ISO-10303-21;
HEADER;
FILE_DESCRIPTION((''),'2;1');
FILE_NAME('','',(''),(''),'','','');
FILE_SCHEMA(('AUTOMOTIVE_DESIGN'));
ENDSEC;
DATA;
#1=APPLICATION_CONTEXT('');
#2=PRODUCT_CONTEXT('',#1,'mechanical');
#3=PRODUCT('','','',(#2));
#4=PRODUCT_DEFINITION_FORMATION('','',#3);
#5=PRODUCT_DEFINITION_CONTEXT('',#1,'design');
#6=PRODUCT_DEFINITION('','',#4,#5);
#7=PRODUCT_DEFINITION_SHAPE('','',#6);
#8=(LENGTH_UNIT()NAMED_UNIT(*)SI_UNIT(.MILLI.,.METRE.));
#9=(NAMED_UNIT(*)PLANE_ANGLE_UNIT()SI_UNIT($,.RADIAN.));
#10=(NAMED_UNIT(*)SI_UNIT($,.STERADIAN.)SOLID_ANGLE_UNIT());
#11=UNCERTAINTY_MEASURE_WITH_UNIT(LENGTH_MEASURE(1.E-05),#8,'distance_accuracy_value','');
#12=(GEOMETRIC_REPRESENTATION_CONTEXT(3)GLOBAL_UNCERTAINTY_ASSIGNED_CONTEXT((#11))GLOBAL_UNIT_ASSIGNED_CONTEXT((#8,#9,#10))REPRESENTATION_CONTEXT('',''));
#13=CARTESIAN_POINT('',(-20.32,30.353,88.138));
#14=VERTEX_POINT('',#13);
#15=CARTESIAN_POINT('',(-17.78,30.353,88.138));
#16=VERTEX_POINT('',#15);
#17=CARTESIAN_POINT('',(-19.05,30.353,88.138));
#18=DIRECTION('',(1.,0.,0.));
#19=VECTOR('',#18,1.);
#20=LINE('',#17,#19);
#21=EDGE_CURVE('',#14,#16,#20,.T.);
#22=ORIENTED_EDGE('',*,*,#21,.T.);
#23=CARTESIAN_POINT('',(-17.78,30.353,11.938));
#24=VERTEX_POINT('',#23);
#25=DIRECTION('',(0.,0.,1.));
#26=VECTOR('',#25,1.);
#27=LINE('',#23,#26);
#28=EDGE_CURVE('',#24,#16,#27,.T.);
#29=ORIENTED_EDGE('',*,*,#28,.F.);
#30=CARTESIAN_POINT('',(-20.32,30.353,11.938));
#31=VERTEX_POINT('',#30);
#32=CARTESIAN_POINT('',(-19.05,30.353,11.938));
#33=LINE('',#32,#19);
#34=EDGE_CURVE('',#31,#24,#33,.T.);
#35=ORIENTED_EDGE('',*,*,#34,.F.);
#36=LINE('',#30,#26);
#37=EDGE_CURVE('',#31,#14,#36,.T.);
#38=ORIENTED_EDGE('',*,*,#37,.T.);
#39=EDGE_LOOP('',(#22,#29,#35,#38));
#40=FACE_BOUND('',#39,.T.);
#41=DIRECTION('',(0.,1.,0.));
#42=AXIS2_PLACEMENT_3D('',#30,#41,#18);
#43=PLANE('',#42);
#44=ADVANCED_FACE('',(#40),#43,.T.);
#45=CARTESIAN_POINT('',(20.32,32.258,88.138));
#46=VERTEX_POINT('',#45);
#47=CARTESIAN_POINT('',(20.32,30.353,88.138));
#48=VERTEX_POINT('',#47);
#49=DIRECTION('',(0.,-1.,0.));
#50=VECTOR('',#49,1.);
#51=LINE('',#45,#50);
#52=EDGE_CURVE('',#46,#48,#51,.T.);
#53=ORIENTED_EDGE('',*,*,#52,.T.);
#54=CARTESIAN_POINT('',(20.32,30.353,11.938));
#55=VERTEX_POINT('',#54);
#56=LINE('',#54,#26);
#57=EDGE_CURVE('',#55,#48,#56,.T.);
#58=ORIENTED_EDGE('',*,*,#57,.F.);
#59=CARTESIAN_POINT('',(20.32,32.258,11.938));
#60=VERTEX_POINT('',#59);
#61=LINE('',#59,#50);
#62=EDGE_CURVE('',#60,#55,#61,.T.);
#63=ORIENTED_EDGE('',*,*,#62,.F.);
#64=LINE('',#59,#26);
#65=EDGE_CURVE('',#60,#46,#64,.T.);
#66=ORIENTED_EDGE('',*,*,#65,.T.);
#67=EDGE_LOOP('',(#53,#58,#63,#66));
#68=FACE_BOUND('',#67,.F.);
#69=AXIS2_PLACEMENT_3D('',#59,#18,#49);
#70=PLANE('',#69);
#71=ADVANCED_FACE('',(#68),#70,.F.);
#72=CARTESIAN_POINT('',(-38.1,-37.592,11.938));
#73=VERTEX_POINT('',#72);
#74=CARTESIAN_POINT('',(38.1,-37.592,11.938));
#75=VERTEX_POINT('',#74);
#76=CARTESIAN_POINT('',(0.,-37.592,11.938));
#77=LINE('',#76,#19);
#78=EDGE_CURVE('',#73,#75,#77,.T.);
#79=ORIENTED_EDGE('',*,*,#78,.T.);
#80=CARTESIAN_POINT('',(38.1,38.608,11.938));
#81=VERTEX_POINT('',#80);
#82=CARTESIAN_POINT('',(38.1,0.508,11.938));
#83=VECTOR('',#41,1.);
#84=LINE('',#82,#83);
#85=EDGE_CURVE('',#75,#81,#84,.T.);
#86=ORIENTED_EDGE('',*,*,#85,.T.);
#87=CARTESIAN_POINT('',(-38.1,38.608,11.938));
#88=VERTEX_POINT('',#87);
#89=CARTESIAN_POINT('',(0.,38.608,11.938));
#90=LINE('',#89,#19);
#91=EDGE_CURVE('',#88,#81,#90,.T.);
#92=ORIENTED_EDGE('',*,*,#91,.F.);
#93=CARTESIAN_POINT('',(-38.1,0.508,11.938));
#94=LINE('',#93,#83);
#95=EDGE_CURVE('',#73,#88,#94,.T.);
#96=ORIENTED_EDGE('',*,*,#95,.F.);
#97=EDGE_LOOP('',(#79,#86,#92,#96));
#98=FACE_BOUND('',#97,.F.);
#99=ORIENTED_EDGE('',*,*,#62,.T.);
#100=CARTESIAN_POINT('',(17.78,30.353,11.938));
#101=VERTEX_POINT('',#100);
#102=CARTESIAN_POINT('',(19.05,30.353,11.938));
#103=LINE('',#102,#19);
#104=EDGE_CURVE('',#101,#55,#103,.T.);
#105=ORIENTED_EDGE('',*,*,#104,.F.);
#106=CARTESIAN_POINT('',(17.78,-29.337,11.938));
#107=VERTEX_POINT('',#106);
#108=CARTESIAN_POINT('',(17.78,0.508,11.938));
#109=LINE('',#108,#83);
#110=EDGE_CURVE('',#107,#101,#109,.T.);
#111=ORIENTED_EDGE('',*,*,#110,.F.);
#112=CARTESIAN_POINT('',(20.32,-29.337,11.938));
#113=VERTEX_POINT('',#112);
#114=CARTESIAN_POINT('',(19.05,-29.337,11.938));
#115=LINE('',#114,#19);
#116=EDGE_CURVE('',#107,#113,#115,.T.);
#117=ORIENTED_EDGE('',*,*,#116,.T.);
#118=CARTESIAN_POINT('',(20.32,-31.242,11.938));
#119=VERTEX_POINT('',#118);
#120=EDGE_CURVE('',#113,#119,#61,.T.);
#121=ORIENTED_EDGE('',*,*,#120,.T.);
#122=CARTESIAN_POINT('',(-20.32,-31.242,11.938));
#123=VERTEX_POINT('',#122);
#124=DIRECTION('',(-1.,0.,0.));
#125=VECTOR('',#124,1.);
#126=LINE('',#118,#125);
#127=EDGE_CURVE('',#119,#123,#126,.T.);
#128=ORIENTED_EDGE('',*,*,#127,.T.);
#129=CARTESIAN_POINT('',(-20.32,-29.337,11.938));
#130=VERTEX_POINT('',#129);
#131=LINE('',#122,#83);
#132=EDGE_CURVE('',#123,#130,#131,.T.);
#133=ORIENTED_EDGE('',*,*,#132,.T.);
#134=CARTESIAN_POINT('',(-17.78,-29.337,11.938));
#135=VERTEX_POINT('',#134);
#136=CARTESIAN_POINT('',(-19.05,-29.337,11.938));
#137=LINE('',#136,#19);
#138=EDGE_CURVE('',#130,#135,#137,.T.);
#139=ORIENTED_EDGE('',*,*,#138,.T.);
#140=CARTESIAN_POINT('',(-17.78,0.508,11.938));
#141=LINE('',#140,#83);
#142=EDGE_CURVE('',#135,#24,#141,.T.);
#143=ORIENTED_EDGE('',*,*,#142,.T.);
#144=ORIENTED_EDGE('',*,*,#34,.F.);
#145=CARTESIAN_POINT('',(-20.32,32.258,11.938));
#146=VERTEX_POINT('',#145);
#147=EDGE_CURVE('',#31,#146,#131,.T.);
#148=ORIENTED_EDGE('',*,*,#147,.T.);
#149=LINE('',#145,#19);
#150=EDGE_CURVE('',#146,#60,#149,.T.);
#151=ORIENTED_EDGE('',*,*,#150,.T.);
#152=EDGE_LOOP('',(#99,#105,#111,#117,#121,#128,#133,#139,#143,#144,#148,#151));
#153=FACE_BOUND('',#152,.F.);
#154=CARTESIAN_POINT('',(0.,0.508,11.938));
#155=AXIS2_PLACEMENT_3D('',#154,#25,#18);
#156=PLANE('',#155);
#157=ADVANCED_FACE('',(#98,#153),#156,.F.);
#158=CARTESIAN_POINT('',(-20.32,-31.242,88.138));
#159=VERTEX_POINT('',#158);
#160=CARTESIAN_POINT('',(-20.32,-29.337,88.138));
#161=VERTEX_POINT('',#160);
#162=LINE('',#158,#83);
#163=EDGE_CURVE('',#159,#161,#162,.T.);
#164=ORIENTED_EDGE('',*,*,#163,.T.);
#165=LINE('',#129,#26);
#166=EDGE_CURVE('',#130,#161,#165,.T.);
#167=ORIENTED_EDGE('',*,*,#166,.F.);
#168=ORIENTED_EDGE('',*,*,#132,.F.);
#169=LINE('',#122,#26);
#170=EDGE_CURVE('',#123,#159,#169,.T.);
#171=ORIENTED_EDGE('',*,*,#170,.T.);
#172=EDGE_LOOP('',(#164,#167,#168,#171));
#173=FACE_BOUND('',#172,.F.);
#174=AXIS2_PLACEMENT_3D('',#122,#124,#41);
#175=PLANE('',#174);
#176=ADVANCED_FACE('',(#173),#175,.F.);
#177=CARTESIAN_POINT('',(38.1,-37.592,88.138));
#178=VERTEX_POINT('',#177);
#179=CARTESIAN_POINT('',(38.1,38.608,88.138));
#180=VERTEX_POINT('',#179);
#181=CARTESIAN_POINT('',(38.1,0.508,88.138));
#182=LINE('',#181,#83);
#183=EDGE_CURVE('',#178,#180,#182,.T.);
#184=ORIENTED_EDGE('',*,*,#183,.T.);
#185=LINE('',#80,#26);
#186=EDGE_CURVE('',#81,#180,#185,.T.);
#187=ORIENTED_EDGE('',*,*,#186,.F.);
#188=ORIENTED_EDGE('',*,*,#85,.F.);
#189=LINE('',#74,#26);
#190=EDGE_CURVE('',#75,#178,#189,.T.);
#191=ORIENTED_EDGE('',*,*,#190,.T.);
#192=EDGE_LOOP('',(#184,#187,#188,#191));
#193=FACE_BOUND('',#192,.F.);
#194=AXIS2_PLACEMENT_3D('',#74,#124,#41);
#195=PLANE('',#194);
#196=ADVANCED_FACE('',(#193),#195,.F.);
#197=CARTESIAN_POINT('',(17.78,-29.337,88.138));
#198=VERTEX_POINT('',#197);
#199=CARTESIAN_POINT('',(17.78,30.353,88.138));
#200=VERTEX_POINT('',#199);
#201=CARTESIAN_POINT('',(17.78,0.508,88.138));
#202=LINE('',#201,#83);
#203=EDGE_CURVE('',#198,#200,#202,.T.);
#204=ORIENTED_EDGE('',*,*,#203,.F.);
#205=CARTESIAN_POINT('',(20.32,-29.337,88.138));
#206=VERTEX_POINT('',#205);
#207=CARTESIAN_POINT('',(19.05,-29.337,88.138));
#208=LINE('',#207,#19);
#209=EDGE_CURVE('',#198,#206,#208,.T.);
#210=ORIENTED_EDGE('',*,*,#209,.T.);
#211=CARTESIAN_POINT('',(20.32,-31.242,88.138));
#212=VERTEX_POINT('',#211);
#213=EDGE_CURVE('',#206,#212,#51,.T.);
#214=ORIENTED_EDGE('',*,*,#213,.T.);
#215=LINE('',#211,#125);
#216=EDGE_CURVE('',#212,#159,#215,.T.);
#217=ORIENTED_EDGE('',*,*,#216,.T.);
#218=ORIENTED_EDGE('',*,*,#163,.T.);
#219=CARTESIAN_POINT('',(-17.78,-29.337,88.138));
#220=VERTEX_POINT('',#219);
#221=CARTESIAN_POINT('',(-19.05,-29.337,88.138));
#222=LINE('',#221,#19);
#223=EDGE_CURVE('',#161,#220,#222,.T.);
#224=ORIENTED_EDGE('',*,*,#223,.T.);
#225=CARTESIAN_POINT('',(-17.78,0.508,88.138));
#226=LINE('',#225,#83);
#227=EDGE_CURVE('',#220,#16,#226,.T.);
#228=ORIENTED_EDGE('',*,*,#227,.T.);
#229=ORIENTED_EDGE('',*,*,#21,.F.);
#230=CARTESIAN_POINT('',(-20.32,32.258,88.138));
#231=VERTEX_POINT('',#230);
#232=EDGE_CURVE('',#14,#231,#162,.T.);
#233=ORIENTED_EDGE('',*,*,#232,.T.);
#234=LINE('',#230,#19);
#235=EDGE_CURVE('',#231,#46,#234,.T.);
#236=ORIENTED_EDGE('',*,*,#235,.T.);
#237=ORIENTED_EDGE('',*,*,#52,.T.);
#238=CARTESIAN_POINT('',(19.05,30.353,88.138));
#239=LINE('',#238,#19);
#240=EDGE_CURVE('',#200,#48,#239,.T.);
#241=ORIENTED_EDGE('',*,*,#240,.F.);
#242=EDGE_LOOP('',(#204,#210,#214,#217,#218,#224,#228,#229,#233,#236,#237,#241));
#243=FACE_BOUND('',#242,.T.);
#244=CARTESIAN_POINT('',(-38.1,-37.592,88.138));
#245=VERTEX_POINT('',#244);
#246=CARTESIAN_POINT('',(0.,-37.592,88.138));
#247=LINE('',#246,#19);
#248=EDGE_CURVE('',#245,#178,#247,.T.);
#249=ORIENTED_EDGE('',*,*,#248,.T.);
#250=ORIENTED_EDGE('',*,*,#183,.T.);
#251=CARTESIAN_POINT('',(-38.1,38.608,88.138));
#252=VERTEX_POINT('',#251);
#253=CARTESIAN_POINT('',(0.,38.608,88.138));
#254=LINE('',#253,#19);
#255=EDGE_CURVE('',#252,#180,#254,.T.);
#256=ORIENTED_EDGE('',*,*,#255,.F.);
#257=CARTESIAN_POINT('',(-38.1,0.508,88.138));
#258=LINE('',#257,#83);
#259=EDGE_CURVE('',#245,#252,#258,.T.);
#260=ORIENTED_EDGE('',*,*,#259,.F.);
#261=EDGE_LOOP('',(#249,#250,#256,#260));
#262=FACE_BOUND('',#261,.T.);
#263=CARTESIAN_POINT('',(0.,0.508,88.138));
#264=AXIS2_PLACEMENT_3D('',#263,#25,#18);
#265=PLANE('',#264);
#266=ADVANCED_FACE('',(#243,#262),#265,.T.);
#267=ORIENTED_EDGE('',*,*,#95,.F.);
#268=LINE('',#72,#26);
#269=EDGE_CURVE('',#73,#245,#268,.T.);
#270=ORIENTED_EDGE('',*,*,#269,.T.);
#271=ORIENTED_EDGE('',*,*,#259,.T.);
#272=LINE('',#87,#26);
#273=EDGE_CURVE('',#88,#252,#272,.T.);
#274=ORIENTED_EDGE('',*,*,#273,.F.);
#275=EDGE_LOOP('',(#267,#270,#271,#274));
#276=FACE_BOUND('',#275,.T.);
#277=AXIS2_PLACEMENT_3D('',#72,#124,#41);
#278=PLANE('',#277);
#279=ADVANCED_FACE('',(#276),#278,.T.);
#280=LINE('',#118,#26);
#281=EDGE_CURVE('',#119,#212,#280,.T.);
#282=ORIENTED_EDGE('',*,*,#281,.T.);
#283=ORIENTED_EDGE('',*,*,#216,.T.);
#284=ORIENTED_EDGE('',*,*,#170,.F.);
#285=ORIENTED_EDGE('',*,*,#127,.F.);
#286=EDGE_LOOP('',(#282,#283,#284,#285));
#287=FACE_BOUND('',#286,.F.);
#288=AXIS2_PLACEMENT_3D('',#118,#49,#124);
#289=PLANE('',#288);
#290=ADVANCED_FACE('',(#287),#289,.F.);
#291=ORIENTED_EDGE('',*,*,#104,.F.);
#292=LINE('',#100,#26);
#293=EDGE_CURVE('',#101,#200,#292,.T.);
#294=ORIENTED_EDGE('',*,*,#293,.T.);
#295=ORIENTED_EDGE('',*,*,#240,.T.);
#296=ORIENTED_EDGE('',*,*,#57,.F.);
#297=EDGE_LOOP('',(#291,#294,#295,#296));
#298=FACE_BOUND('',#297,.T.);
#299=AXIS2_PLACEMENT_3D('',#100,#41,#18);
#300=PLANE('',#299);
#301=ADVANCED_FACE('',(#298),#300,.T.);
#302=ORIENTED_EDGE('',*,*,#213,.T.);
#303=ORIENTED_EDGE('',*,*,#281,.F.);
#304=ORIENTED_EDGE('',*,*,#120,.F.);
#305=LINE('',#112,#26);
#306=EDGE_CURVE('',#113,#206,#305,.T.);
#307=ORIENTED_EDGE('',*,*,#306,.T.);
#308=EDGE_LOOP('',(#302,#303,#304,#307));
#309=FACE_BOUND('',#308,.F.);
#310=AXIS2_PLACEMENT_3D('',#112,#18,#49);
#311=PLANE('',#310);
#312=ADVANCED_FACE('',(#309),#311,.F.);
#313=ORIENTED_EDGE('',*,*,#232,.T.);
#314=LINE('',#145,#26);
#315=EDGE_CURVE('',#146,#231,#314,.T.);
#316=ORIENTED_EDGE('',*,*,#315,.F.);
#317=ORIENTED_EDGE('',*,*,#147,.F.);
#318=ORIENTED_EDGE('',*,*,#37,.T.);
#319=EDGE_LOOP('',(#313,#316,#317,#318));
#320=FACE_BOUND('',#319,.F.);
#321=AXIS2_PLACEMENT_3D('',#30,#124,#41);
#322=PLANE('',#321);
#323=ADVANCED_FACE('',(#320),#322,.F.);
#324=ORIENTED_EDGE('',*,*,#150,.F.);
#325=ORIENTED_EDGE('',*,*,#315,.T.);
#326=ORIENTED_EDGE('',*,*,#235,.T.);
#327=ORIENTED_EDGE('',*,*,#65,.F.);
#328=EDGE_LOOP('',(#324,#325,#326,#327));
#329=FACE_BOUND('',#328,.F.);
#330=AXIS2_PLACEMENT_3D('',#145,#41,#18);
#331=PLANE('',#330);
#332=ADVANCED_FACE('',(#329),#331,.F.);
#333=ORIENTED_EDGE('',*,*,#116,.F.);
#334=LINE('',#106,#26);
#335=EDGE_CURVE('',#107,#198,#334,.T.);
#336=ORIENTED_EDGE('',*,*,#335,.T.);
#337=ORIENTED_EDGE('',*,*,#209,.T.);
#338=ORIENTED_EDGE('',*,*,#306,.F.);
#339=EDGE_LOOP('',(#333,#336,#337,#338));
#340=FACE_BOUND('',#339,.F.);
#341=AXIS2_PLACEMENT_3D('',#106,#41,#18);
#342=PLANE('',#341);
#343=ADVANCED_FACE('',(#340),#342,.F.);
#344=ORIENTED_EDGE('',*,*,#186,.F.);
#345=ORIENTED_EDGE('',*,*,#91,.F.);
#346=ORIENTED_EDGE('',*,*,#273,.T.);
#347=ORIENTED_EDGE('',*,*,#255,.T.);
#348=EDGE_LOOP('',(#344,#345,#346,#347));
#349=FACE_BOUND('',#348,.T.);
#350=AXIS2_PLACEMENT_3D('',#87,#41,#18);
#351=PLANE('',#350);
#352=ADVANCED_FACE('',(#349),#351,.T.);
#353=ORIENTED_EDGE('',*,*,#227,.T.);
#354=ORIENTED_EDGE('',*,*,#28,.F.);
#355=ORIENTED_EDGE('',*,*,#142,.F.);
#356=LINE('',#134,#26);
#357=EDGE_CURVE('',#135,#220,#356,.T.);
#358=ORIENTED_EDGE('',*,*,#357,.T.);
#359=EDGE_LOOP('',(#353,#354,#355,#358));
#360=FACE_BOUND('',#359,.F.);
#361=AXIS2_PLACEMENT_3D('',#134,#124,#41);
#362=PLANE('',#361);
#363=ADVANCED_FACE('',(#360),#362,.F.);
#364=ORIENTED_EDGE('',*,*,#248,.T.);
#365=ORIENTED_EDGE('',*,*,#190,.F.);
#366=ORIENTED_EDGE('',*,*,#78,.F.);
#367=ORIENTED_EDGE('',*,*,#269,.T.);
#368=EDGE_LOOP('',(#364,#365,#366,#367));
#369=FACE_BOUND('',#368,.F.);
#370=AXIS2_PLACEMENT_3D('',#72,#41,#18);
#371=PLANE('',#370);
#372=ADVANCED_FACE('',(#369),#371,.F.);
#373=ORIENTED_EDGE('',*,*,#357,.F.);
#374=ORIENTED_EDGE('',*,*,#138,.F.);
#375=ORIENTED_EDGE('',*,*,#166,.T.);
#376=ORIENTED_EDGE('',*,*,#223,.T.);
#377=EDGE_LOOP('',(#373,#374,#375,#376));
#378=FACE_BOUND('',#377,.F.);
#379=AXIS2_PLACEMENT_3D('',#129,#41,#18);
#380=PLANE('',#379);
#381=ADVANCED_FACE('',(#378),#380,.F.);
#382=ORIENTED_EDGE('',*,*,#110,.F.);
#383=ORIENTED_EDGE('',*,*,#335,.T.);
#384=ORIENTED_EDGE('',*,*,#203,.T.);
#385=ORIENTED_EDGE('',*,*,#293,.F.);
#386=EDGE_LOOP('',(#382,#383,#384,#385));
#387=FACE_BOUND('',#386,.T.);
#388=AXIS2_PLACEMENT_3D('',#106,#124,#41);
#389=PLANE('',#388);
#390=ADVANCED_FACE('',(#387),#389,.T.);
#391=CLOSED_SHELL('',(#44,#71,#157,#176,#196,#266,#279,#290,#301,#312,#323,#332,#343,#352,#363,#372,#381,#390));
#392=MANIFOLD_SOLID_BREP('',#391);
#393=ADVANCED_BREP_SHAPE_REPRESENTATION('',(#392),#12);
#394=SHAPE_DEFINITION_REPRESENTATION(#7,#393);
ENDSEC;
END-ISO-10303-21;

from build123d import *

# Parameters (mm, degrees)
F0_W     = 76.2
F0_H     = 76.2
F0_W_2   = 2.54
F0_H_2   = 59.69
F1_DEPTH = 76.2


# Not quite as in the source:
# - the program builds the solid bodies; features that only make, move or delete a surface that nothing else refers to are left out


with BuildPart() as f1:
    # F0 (on Top) → F1 (new body)
    with BuildSketch(Plane.XY):
        with Locations((-38.1, 38.1)):
            Rectangle(F0_W, F0_H)
        Polygon((-58.42, 69.85), (-17.78, 69.85), (-17.78, 67.945), (-17.78, 8.255), (-17.78, 6.35), (-58.42, 6.35), (-58.42, 8.255), (-58.42, 67.945), align=None, mode=Mode.SUBTRACT)
        with Locations((-57.15, 38.1)):
            Rectangle(F0_W_2, F0_H_2)
        with Locations((-19.05, 38.1)):
            Rectangle(F0_W_2, F0_H_2)
    extrude(amount=F1_DEPTH)


with BuildPart() as f1_1:
    # F3: moved
    add(f1.part.moved(Location((0, 106.934, 0))))


with BuildPart() as f1_2:
    # F6: moved
    add(f1_1.part.moved(Location((38.1, -144.526, 11.938))))


solid = f1_2.part
